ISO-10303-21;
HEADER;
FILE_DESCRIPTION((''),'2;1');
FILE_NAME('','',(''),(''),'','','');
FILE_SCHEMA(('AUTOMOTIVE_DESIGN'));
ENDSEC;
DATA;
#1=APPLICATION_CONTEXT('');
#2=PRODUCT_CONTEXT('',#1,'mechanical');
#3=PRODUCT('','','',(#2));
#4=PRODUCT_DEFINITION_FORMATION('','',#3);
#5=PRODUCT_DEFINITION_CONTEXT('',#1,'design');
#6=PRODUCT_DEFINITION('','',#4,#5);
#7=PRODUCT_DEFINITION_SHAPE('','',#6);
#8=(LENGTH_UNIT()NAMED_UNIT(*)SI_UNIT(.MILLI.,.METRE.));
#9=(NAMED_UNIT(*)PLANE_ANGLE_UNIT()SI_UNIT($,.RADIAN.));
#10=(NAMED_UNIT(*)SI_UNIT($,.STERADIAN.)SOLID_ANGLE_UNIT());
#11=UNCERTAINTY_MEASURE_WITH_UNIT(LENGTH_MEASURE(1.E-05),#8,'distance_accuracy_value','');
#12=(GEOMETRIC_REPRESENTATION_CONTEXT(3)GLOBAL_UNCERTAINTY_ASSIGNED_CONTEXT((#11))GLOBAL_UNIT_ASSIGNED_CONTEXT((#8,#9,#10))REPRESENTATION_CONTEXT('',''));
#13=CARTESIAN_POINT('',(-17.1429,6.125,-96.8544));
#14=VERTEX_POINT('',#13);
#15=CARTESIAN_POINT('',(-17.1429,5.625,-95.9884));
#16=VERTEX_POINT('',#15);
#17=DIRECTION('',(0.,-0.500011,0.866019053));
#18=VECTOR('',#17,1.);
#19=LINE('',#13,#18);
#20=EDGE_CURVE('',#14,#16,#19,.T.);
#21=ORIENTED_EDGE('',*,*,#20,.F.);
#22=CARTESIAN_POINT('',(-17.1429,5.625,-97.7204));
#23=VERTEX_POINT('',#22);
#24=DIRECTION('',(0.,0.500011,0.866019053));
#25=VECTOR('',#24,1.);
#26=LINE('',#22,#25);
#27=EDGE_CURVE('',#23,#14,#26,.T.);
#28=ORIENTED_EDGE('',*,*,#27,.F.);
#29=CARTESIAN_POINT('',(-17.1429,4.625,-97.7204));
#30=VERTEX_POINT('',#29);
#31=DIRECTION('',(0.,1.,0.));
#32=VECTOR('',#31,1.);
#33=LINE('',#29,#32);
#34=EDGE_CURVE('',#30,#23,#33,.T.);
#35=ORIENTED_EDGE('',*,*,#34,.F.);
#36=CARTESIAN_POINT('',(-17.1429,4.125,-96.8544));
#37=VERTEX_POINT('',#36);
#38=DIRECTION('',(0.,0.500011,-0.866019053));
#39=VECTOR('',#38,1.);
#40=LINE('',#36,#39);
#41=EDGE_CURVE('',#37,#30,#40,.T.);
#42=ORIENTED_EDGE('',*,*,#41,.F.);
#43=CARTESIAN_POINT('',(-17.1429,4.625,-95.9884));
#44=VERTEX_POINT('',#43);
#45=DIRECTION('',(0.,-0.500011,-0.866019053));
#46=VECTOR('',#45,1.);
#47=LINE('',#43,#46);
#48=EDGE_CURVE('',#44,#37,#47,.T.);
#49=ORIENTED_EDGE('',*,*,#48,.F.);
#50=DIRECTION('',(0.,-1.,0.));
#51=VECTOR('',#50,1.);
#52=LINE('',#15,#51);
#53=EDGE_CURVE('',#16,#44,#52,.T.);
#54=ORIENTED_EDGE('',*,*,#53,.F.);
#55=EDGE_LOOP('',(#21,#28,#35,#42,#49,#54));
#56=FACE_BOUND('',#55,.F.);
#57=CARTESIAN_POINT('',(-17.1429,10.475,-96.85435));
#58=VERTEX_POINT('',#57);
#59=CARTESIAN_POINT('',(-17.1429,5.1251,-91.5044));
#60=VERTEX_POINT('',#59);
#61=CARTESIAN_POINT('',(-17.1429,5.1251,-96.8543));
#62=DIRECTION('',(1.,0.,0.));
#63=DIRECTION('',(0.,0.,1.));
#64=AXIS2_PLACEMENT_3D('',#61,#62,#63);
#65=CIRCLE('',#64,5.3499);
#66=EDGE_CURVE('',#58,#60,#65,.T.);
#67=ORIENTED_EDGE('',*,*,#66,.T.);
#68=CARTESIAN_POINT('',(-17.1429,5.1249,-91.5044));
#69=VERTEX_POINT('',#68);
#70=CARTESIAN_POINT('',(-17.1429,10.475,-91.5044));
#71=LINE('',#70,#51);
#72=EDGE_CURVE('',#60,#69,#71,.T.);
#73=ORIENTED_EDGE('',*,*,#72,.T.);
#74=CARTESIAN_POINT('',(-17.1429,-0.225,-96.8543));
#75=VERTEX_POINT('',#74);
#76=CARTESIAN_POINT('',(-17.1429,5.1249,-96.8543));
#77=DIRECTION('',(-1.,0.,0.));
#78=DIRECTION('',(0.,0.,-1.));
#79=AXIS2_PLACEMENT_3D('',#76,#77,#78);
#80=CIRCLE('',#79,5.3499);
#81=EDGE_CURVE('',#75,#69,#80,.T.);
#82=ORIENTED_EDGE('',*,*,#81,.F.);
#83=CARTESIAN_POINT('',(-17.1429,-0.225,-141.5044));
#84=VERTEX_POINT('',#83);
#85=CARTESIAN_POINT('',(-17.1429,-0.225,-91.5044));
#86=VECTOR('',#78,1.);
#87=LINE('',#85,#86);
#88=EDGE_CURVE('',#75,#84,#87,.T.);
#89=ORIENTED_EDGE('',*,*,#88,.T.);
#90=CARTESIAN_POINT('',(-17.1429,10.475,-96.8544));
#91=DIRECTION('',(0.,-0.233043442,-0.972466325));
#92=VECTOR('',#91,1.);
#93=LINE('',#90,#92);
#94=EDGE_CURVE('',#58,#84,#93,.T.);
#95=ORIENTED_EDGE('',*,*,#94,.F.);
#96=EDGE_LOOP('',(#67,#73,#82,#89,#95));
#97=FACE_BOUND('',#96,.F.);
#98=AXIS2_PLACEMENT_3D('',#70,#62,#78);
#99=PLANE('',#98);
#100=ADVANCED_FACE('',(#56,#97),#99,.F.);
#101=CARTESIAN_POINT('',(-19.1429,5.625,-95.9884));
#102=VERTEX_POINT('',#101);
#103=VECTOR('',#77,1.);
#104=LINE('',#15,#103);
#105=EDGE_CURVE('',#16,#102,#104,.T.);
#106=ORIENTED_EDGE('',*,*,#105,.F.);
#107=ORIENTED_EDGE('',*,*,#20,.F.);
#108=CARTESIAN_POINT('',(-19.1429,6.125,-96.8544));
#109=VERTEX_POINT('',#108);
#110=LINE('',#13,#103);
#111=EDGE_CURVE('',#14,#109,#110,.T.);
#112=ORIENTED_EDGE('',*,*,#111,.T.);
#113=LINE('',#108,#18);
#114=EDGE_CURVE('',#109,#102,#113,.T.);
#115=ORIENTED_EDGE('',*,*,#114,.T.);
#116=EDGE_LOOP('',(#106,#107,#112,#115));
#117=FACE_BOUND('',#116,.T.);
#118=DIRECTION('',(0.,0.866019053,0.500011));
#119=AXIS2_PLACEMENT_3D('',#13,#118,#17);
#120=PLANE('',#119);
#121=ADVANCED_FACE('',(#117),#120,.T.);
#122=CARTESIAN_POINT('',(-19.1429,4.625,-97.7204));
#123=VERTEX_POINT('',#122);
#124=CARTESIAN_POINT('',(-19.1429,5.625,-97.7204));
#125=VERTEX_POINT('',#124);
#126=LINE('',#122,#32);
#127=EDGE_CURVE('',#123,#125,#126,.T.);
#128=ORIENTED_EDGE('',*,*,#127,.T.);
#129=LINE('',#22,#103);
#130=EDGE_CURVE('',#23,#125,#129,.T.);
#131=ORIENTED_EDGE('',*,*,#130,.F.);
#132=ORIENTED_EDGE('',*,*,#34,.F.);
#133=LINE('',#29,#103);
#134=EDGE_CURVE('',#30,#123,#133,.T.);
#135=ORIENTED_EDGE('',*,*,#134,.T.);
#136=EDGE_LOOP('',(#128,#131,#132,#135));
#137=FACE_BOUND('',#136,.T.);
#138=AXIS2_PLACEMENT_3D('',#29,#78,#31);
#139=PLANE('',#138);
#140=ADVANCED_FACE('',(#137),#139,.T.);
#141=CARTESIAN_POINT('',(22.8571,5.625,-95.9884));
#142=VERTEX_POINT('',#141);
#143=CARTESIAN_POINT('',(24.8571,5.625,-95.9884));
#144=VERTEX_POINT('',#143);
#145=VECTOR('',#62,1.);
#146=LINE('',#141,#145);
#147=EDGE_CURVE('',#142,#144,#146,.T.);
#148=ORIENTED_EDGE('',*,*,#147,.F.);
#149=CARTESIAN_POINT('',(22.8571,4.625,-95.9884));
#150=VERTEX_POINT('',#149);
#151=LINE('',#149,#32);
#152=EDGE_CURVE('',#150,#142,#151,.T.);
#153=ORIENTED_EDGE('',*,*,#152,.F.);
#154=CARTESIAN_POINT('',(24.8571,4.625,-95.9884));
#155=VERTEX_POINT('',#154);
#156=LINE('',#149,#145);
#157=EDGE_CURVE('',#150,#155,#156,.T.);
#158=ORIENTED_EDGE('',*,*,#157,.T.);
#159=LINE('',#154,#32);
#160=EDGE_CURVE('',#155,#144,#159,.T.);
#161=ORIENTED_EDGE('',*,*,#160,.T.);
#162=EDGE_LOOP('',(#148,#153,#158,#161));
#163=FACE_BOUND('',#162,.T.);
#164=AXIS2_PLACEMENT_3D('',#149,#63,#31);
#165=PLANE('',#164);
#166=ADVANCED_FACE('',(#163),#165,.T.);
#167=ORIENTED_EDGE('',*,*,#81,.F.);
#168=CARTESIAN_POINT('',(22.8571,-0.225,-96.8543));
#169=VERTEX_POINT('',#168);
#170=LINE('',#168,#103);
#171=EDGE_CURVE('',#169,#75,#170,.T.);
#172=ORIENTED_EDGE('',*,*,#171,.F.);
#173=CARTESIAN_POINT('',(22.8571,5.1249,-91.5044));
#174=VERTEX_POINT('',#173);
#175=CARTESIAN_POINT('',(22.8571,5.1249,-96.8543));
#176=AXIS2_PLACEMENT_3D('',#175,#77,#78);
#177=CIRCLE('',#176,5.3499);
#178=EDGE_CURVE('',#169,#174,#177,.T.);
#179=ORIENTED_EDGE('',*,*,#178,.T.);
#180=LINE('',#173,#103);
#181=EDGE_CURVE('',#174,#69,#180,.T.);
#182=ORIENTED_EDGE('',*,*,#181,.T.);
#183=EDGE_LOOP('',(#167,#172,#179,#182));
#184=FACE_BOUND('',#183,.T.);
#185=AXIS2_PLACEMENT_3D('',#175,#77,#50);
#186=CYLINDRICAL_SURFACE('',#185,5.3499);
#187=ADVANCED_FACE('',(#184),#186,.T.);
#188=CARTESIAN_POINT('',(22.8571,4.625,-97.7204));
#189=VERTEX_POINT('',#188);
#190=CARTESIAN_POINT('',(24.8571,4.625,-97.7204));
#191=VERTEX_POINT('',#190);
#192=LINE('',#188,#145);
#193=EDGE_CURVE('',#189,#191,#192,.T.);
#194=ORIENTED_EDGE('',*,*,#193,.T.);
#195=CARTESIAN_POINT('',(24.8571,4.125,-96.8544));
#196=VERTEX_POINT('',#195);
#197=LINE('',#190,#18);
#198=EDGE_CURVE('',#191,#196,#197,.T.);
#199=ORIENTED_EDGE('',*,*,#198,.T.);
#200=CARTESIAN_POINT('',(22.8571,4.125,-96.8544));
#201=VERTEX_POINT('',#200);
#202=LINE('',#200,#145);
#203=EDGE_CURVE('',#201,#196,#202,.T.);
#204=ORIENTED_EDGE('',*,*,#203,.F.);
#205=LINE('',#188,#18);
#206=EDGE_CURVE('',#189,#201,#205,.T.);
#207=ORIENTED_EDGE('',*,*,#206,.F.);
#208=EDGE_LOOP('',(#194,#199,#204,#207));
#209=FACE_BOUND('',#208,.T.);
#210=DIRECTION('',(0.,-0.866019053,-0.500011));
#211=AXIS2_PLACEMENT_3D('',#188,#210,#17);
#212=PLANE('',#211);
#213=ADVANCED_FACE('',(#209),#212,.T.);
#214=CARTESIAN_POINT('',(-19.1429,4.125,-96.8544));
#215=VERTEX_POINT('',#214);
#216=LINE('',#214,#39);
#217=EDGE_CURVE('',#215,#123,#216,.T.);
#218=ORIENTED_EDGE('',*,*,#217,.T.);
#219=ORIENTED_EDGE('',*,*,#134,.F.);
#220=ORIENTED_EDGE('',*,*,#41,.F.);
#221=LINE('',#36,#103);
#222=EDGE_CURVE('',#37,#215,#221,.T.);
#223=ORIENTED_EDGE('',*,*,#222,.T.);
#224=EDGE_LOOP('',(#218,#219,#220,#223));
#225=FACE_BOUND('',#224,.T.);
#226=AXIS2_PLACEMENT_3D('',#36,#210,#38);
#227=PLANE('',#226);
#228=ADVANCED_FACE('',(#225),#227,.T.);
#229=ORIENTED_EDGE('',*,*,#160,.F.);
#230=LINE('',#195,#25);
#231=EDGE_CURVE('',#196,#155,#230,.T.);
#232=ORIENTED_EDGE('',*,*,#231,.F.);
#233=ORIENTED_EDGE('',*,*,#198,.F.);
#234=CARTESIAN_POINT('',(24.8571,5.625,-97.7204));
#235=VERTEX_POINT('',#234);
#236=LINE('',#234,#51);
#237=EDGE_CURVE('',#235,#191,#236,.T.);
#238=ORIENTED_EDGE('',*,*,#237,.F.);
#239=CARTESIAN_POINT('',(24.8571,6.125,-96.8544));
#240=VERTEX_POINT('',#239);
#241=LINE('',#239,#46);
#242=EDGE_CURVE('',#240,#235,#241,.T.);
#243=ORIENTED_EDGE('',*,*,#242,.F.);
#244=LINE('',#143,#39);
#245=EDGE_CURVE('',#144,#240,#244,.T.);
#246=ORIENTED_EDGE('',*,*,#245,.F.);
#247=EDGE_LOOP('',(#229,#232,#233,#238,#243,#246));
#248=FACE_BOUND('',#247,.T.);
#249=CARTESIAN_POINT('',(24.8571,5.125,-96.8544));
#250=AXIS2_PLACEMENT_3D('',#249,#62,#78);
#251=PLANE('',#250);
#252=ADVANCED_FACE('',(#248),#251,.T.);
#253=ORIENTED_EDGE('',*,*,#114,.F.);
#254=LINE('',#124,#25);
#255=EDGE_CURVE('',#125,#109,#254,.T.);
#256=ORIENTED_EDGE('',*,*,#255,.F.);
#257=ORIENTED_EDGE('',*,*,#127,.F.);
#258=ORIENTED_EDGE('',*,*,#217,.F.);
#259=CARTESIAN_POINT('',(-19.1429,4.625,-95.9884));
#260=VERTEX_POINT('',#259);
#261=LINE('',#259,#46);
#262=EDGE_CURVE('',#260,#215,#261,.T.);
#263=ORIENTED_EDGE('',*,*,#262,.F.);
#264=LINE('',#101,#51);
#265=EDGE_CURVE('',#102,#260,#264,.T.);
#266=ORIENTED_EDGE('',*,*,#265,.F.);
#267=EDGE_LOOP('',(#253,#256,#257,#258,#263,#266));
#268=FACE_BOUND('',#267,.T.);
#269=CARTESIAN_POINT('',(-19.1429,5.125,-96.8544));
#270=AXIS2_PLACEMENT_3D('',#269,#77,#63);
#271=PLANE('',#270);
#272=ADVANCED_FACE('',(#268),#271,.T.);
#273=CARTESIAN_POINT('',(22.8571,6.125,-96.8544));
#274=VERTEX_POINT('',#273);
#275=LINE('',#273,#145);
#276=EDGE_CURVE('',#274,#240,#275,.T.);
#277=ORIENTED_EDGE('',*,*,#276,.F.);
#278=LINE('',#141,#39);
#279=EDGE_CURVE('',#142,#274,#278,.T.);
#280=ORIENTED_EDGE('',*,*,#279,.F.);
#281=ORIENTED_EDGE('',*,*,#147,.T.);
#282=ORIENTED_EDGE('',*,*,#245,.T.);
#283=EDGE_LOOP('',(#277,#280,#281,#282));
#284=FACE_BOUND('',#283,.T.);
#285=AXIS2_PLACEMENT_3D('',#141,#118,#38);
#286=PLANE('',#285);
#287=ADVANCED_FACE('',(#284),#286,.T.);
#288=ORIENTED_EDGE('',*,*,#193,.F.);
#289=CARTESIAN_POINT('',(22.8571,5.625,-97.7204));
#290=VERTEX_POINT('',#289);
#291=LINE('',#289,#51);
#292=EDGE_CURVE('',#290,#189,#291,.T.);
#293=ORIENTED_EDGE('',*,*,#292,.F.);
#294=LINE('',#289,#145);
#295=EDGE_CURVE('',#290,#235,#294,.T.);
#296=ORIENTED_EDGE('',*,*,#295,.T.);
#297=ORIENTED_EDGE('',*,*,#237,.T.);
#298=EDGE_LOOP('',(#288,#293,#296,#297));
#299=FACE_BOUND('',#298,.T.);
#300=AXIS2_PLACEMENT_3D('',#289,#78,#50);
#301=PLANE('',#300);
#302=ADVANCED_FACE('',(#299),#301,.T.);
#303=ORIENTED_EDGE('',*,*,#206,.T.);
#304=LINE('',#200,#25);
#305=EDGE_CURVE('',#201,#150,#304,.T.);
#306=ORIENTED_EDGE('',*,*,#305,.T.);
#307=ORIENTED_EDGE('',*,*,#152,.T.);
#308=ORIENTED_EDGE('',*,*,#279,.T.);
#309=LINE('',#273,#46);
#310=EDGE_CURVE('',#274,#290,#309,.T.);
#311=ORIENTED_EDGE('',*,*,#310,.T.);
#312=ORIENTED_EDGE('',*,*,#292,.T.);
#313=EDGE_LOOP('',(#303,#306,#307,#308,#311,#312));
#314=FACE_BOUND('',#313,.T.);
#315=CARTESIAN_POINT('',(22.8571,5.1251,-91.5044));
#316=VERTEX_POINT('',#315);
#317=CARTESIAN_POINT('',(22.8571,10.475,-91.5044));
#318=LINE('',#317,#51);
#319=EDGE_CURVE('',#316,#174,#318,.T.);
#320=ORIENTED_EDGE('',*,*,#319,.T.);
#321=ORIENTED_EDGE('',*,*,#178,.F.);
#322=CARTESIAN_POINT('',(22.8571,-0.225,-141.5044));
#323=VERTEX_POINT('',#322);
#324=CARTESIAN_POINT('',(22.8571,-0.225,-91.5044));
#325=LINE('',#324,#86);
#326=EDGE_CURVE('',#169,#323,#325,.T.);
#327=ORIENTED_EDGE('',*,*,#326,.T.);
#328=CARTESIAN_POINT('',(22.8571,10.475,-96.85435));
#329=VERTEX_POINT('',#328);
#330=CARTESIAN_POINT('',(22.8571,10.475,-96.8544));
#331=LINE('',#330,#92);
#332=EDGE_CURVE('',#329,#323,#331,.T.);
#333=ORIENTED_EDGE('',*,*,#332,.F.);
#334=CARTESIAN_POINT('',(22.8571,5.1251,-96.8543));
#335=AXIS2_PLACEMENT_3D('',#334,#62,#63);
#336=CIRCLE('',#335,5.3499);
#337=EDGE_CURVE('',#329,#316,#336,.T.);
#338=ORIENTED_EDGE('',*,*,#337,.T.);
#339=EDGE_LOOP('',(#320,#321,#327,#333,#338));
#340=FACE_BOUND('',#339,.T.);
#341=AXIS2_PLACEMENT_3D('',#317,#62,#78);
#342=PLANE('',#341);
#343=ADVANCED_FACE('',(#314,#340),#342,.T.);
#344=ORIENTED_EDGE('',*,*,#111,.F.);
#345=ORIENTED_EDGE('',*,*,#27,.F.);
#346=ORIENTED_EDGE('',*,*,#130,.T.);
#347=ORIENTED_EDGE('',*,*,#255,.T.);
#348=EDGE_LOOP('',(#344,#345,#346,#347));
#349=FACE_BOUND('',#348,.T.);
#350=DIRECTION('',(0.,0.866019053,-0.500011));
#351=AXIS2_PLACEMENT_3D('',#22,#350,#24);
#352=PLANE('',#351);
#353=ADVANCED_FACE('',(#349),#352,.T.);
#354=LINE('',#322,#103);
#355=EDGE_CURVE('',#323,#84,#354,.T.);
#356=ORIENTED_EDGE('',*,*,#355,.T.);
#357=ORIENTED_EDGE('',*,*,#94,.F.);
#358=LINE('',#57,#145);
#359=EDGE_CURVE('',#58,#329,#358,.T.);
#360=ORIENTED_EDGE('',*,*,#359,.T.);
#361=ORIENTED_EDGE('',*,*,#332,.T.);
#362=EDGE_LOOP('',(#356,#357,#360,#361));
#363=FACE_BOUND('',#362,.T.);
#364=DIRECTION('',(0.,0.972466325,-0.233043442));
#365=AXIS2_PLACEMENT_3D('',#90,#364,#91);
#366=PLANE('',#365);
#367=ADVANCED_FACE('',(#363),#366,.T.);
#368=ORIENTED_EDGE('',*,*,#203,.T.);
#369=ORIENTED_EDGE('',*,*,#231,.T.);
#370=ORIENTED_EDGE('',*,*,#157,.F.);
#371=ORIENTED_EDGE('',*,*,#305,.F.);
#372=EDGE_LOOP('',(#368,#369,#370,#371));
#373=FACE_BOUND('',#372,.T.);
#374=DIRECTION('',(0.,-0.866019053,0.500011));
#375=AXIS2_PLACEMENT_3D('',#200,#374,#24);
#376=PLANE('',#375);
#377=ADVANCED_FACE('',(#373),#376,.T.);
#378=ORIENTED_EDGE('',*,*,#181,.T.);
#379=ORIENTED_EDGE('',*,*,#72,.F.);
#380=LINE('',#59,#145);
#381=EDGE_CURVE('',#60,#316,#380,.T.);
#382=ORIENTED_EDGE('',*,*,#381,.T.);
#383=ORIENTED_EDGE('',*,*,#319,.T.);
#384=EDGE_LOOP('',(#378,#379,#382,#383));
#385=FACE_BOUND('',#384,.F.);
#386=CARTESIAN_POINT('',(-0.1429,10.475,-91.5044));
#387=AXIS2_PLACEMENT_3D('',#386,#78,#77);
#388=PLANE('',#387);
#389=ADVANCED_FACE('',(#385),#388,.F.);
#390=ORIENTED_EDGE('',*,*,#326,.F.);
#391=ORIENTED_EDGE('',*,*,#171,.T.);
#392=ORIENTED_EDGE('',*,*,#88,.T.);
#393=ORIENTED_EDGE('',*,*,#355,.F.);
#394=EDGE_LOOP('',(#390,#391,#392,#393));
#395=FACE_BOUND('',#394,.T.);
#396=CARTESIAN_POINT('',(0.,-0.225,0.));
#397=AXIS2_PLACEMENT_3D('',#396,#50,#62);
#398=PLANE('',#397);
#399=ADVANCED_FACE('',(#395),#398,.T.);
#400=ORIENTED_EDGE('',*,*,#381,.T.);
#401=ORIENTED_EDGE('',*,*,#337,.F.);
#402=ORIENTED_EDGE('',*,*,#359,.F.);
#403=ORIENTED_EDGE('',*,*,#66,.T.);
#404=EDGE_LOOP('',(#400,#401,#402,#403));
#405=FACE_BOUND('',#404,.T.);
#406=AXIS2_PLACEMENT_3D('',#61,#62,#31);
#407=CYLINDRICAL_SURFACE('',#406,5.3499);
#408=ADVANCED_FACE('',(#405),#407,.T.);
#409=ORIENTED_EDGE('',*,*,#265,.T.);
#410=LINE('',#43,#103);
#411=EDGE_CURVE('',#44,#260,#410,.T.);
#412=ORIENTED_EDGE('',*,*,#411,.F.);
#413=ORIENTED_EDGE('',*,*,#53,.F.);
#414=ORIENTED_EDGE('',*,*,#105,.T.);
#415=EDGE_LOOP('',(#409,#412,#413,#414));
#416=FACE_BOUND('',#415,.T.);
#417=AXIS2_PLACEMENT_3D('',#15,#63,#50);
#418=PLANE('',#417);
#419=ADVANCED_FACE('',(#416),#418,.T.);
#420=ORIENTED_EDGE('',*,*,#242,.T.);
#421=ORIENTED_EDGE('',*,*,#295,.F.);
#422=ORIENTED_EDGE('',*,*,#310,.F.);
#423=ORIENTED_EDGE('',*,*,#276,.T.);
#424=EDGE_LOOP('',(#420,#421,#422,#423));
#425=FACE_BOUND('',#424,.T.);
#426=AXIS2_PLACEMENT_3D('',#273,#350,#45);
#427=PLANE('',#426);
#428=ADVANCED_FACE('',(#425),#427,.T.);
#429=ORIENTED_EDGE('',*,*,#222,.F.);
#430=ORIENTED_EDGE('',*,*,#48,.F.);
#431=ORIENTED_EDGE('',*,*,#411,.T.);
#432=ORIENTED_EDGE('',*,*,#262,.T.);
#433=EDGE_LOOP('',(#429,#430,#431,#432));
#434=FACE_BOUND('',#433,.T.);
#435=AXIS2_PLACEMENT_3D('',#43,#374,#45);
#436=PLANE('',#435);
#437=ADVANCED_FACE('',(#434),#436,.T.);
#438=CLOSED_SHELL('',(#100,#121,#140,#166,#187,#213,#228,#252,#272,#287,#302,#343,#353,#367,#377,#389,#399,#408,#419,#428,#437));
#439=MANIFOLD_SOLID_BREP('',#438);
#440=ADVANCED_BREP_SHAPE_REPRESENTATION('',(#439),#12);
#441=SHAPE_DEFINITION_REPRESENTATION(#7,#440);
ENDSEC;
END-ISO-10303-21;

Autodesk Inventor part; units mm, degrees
ref_plane "YZ Plane" through (0, 0, 0) normal (1, 0, 0) x (0, 1, 0)
ref_plane "XZ Plane" through (0, 0, 0) normal (0, 1, 0) x (-1, 0, 0)
ref_plane "XY Plane" through (0, 0, 0) normal (0, 0, 1) x (1, 0, 0)
sketch "Sketch1" plane through (0, 0, 0) normal (0, 1, 0) x (-1, 0, 0)
  line L0 (17.1429, -30) -> (-22.8571, -30)
  line L1 (-22.8571, -30) -> (-22.8571, -80)
  line L2 (-22.8571, -80) -> (17.1429, -80)
  line L3 (17.1429, -80) -> (17.1429, -30)
  point P0 (0, 0)
  dimension "d0" = 40
  dimension "d1" = 50
extrude "Extrusion1" add sketch "Sketch1" along normal blind 10.475
sketch "Sketch3" plane through (22.8571, 0, -80) normal (0, 0, -1) x (-1, 0, 0)
  line L0 (0, 0) -> (40, 0) projected
  line L1 (0, 10.475) -> (40, 10.475)
  line L2 (40, 10.475) -> (40, 0)
  line L3 (40, 0) -> (0, 0)
  line L4 (0, 0) -> (0, 10.475)
  point P0 (22.8571, 0)
extrude "Extrusion3" add sketch "Sketch3" along normal blind 11.252
full round fillet "Fillet1" first side at (9.5238, 10.475, -50.4173) centre faces at (9.5238, 3.4917, -91.252) second side at (9.5238, 0, -70.8347)
sketch "Sketch6" plane through (0, 0, 0) normal (0, -1, 0) x (1, 0, 0)
  line L0 (22.8571, -30) -> (22.8571, -86.0145) projected
  line L1 (-17.1429, -91.252) -> (-17.1429, -86.0145) projected
  line L2 (22.8571, -30) -> (-17.1429, -30)
  line L3 (-17.1429, -30) -> (-17.1429, -91.252)
  line L4 (-17.1429, -91.252) -> (22.8571, -91.252)
  line L5 (22.8571, -91.252) -> (22.8571, -30)
  point P0 (0, 0)
extrude "Extrusion5" cut sketch "Sketch6" against normal blind 10.7
ref_plane "Work Plane5" through (0, 10.475, 0) normal (0, -1, 0) x (1, 0, 0)
sketch "Sketch8" plane through (0, 10.475, 0) normal (0, -1, 0) x (1, 0, 0)
  line L0 (-0.1429, -97) -> (-0.1429, -83) projected
  line L1 (-0.1429, -91.5044) -> (22.8571, -91.5044)
  line L2 (22.8571, -91.5044) -> (22.8571, -141.5044)
  line L3 (22.8571, -141.5044) -> (-0.1429, -141.5044)
  line L4 (-0.1429, -141.5044) -> (-0.1429, -91.5044)
  line L5 (-0.1429, -91.5044) -> (-17.1429, -91.5044)
  line L6 (-17.1429, -91.5044) -> (-17.1429, -141.5044)
  line L7 (-17.1429, -141.5044) -> (-0.1429, -141.5044)
  line L8 (-0.1429, -141.5044) -> (-0.1429, -91.5044)
  point P0 (0, 0)
  dimension "d14" = 23
  dimension "d15" = 50
  dimension "d16" = 17
extrude "Extrusion6" add sketch "Sketch8" along normal blind 10.7
full round fillet "Fillet2" first side at (15.1905, 10.475, -124.8377) centre faces at (15.1905, 6.9083, -91.5044) second side at (15.1905, -0.225, -124.8377)
sketch "Sketch9" plane through (-17.1429, -0.225, -141.5044) normal (-1, 0, 0) x (0, 0, 1)
  line L0 (0, 10.7) -> (44.65, 10.7) projected
  line L1 (0, 10.7) -> (0, 0) projected
  line L2 (44.65, 10.7) -> (0, 0)
  line L3 (0, 0) -> (0, 10.7)
  arc A0 (44.65, 0) -> (44.65, 10.7) centre (44.65, 5.35) ccw projected
  line L4 (0, 10.7) -> (44.65, 10.7)
  point P0 (141.5044, 0.225)
extrude "Extrusion7" cut sketch "Sketch9" against normal blind 40
sketch "Sketch10" plane through (-17.1429, 5.125, -96.8544) normal (-1, 0, 0) x (0, 0, 1)
  line L0 (0, -1) -> (-0.866, -0.5)
  line L1 (-0.866, -0.5) -> (-0.866, 0.5)
  line L2 (-0.866, 0.5) -> (0, 1)
  line L3 (0, 1) -> (0.866, 0.5)
  line L4 (0.866, 0.5) -> (0.866, -0.5)
  line L5 (0.866, -0.5) -> (0, -1)
  point P0 (96.8544, -5.125)
  point P1 (0, 0)
extrude "Extrusion8" add sketch "Sketch10" along normal blind 2
sketch "Sketch11" plane through (22.8571, 5.125, -96.8544) normal (1, 0, 0) x (0, 0, -1)
  line L0 (0, -1) -> (-0.866, -0.5) projected
  line L1 (0, -1) -> (-0.866, -0.5)
  line L2 (-0.866, -0.5) -> (-0.866, 0.5)
  line L3 (-0.866, 0.5) -> (0, 1)
  line L4 (0, 1) -> (0.866, 0.5)
  line L5 (0.866, 0.5) -> (0.866, -0.5)
  line L6 (0.866, -0.5) -> (0, -1)
  point P0 (-96.8544, -5.125)
  point P1 (0, 0)
extrude "Extrusion9" add sketch "Sketch11" along normal blind 2
